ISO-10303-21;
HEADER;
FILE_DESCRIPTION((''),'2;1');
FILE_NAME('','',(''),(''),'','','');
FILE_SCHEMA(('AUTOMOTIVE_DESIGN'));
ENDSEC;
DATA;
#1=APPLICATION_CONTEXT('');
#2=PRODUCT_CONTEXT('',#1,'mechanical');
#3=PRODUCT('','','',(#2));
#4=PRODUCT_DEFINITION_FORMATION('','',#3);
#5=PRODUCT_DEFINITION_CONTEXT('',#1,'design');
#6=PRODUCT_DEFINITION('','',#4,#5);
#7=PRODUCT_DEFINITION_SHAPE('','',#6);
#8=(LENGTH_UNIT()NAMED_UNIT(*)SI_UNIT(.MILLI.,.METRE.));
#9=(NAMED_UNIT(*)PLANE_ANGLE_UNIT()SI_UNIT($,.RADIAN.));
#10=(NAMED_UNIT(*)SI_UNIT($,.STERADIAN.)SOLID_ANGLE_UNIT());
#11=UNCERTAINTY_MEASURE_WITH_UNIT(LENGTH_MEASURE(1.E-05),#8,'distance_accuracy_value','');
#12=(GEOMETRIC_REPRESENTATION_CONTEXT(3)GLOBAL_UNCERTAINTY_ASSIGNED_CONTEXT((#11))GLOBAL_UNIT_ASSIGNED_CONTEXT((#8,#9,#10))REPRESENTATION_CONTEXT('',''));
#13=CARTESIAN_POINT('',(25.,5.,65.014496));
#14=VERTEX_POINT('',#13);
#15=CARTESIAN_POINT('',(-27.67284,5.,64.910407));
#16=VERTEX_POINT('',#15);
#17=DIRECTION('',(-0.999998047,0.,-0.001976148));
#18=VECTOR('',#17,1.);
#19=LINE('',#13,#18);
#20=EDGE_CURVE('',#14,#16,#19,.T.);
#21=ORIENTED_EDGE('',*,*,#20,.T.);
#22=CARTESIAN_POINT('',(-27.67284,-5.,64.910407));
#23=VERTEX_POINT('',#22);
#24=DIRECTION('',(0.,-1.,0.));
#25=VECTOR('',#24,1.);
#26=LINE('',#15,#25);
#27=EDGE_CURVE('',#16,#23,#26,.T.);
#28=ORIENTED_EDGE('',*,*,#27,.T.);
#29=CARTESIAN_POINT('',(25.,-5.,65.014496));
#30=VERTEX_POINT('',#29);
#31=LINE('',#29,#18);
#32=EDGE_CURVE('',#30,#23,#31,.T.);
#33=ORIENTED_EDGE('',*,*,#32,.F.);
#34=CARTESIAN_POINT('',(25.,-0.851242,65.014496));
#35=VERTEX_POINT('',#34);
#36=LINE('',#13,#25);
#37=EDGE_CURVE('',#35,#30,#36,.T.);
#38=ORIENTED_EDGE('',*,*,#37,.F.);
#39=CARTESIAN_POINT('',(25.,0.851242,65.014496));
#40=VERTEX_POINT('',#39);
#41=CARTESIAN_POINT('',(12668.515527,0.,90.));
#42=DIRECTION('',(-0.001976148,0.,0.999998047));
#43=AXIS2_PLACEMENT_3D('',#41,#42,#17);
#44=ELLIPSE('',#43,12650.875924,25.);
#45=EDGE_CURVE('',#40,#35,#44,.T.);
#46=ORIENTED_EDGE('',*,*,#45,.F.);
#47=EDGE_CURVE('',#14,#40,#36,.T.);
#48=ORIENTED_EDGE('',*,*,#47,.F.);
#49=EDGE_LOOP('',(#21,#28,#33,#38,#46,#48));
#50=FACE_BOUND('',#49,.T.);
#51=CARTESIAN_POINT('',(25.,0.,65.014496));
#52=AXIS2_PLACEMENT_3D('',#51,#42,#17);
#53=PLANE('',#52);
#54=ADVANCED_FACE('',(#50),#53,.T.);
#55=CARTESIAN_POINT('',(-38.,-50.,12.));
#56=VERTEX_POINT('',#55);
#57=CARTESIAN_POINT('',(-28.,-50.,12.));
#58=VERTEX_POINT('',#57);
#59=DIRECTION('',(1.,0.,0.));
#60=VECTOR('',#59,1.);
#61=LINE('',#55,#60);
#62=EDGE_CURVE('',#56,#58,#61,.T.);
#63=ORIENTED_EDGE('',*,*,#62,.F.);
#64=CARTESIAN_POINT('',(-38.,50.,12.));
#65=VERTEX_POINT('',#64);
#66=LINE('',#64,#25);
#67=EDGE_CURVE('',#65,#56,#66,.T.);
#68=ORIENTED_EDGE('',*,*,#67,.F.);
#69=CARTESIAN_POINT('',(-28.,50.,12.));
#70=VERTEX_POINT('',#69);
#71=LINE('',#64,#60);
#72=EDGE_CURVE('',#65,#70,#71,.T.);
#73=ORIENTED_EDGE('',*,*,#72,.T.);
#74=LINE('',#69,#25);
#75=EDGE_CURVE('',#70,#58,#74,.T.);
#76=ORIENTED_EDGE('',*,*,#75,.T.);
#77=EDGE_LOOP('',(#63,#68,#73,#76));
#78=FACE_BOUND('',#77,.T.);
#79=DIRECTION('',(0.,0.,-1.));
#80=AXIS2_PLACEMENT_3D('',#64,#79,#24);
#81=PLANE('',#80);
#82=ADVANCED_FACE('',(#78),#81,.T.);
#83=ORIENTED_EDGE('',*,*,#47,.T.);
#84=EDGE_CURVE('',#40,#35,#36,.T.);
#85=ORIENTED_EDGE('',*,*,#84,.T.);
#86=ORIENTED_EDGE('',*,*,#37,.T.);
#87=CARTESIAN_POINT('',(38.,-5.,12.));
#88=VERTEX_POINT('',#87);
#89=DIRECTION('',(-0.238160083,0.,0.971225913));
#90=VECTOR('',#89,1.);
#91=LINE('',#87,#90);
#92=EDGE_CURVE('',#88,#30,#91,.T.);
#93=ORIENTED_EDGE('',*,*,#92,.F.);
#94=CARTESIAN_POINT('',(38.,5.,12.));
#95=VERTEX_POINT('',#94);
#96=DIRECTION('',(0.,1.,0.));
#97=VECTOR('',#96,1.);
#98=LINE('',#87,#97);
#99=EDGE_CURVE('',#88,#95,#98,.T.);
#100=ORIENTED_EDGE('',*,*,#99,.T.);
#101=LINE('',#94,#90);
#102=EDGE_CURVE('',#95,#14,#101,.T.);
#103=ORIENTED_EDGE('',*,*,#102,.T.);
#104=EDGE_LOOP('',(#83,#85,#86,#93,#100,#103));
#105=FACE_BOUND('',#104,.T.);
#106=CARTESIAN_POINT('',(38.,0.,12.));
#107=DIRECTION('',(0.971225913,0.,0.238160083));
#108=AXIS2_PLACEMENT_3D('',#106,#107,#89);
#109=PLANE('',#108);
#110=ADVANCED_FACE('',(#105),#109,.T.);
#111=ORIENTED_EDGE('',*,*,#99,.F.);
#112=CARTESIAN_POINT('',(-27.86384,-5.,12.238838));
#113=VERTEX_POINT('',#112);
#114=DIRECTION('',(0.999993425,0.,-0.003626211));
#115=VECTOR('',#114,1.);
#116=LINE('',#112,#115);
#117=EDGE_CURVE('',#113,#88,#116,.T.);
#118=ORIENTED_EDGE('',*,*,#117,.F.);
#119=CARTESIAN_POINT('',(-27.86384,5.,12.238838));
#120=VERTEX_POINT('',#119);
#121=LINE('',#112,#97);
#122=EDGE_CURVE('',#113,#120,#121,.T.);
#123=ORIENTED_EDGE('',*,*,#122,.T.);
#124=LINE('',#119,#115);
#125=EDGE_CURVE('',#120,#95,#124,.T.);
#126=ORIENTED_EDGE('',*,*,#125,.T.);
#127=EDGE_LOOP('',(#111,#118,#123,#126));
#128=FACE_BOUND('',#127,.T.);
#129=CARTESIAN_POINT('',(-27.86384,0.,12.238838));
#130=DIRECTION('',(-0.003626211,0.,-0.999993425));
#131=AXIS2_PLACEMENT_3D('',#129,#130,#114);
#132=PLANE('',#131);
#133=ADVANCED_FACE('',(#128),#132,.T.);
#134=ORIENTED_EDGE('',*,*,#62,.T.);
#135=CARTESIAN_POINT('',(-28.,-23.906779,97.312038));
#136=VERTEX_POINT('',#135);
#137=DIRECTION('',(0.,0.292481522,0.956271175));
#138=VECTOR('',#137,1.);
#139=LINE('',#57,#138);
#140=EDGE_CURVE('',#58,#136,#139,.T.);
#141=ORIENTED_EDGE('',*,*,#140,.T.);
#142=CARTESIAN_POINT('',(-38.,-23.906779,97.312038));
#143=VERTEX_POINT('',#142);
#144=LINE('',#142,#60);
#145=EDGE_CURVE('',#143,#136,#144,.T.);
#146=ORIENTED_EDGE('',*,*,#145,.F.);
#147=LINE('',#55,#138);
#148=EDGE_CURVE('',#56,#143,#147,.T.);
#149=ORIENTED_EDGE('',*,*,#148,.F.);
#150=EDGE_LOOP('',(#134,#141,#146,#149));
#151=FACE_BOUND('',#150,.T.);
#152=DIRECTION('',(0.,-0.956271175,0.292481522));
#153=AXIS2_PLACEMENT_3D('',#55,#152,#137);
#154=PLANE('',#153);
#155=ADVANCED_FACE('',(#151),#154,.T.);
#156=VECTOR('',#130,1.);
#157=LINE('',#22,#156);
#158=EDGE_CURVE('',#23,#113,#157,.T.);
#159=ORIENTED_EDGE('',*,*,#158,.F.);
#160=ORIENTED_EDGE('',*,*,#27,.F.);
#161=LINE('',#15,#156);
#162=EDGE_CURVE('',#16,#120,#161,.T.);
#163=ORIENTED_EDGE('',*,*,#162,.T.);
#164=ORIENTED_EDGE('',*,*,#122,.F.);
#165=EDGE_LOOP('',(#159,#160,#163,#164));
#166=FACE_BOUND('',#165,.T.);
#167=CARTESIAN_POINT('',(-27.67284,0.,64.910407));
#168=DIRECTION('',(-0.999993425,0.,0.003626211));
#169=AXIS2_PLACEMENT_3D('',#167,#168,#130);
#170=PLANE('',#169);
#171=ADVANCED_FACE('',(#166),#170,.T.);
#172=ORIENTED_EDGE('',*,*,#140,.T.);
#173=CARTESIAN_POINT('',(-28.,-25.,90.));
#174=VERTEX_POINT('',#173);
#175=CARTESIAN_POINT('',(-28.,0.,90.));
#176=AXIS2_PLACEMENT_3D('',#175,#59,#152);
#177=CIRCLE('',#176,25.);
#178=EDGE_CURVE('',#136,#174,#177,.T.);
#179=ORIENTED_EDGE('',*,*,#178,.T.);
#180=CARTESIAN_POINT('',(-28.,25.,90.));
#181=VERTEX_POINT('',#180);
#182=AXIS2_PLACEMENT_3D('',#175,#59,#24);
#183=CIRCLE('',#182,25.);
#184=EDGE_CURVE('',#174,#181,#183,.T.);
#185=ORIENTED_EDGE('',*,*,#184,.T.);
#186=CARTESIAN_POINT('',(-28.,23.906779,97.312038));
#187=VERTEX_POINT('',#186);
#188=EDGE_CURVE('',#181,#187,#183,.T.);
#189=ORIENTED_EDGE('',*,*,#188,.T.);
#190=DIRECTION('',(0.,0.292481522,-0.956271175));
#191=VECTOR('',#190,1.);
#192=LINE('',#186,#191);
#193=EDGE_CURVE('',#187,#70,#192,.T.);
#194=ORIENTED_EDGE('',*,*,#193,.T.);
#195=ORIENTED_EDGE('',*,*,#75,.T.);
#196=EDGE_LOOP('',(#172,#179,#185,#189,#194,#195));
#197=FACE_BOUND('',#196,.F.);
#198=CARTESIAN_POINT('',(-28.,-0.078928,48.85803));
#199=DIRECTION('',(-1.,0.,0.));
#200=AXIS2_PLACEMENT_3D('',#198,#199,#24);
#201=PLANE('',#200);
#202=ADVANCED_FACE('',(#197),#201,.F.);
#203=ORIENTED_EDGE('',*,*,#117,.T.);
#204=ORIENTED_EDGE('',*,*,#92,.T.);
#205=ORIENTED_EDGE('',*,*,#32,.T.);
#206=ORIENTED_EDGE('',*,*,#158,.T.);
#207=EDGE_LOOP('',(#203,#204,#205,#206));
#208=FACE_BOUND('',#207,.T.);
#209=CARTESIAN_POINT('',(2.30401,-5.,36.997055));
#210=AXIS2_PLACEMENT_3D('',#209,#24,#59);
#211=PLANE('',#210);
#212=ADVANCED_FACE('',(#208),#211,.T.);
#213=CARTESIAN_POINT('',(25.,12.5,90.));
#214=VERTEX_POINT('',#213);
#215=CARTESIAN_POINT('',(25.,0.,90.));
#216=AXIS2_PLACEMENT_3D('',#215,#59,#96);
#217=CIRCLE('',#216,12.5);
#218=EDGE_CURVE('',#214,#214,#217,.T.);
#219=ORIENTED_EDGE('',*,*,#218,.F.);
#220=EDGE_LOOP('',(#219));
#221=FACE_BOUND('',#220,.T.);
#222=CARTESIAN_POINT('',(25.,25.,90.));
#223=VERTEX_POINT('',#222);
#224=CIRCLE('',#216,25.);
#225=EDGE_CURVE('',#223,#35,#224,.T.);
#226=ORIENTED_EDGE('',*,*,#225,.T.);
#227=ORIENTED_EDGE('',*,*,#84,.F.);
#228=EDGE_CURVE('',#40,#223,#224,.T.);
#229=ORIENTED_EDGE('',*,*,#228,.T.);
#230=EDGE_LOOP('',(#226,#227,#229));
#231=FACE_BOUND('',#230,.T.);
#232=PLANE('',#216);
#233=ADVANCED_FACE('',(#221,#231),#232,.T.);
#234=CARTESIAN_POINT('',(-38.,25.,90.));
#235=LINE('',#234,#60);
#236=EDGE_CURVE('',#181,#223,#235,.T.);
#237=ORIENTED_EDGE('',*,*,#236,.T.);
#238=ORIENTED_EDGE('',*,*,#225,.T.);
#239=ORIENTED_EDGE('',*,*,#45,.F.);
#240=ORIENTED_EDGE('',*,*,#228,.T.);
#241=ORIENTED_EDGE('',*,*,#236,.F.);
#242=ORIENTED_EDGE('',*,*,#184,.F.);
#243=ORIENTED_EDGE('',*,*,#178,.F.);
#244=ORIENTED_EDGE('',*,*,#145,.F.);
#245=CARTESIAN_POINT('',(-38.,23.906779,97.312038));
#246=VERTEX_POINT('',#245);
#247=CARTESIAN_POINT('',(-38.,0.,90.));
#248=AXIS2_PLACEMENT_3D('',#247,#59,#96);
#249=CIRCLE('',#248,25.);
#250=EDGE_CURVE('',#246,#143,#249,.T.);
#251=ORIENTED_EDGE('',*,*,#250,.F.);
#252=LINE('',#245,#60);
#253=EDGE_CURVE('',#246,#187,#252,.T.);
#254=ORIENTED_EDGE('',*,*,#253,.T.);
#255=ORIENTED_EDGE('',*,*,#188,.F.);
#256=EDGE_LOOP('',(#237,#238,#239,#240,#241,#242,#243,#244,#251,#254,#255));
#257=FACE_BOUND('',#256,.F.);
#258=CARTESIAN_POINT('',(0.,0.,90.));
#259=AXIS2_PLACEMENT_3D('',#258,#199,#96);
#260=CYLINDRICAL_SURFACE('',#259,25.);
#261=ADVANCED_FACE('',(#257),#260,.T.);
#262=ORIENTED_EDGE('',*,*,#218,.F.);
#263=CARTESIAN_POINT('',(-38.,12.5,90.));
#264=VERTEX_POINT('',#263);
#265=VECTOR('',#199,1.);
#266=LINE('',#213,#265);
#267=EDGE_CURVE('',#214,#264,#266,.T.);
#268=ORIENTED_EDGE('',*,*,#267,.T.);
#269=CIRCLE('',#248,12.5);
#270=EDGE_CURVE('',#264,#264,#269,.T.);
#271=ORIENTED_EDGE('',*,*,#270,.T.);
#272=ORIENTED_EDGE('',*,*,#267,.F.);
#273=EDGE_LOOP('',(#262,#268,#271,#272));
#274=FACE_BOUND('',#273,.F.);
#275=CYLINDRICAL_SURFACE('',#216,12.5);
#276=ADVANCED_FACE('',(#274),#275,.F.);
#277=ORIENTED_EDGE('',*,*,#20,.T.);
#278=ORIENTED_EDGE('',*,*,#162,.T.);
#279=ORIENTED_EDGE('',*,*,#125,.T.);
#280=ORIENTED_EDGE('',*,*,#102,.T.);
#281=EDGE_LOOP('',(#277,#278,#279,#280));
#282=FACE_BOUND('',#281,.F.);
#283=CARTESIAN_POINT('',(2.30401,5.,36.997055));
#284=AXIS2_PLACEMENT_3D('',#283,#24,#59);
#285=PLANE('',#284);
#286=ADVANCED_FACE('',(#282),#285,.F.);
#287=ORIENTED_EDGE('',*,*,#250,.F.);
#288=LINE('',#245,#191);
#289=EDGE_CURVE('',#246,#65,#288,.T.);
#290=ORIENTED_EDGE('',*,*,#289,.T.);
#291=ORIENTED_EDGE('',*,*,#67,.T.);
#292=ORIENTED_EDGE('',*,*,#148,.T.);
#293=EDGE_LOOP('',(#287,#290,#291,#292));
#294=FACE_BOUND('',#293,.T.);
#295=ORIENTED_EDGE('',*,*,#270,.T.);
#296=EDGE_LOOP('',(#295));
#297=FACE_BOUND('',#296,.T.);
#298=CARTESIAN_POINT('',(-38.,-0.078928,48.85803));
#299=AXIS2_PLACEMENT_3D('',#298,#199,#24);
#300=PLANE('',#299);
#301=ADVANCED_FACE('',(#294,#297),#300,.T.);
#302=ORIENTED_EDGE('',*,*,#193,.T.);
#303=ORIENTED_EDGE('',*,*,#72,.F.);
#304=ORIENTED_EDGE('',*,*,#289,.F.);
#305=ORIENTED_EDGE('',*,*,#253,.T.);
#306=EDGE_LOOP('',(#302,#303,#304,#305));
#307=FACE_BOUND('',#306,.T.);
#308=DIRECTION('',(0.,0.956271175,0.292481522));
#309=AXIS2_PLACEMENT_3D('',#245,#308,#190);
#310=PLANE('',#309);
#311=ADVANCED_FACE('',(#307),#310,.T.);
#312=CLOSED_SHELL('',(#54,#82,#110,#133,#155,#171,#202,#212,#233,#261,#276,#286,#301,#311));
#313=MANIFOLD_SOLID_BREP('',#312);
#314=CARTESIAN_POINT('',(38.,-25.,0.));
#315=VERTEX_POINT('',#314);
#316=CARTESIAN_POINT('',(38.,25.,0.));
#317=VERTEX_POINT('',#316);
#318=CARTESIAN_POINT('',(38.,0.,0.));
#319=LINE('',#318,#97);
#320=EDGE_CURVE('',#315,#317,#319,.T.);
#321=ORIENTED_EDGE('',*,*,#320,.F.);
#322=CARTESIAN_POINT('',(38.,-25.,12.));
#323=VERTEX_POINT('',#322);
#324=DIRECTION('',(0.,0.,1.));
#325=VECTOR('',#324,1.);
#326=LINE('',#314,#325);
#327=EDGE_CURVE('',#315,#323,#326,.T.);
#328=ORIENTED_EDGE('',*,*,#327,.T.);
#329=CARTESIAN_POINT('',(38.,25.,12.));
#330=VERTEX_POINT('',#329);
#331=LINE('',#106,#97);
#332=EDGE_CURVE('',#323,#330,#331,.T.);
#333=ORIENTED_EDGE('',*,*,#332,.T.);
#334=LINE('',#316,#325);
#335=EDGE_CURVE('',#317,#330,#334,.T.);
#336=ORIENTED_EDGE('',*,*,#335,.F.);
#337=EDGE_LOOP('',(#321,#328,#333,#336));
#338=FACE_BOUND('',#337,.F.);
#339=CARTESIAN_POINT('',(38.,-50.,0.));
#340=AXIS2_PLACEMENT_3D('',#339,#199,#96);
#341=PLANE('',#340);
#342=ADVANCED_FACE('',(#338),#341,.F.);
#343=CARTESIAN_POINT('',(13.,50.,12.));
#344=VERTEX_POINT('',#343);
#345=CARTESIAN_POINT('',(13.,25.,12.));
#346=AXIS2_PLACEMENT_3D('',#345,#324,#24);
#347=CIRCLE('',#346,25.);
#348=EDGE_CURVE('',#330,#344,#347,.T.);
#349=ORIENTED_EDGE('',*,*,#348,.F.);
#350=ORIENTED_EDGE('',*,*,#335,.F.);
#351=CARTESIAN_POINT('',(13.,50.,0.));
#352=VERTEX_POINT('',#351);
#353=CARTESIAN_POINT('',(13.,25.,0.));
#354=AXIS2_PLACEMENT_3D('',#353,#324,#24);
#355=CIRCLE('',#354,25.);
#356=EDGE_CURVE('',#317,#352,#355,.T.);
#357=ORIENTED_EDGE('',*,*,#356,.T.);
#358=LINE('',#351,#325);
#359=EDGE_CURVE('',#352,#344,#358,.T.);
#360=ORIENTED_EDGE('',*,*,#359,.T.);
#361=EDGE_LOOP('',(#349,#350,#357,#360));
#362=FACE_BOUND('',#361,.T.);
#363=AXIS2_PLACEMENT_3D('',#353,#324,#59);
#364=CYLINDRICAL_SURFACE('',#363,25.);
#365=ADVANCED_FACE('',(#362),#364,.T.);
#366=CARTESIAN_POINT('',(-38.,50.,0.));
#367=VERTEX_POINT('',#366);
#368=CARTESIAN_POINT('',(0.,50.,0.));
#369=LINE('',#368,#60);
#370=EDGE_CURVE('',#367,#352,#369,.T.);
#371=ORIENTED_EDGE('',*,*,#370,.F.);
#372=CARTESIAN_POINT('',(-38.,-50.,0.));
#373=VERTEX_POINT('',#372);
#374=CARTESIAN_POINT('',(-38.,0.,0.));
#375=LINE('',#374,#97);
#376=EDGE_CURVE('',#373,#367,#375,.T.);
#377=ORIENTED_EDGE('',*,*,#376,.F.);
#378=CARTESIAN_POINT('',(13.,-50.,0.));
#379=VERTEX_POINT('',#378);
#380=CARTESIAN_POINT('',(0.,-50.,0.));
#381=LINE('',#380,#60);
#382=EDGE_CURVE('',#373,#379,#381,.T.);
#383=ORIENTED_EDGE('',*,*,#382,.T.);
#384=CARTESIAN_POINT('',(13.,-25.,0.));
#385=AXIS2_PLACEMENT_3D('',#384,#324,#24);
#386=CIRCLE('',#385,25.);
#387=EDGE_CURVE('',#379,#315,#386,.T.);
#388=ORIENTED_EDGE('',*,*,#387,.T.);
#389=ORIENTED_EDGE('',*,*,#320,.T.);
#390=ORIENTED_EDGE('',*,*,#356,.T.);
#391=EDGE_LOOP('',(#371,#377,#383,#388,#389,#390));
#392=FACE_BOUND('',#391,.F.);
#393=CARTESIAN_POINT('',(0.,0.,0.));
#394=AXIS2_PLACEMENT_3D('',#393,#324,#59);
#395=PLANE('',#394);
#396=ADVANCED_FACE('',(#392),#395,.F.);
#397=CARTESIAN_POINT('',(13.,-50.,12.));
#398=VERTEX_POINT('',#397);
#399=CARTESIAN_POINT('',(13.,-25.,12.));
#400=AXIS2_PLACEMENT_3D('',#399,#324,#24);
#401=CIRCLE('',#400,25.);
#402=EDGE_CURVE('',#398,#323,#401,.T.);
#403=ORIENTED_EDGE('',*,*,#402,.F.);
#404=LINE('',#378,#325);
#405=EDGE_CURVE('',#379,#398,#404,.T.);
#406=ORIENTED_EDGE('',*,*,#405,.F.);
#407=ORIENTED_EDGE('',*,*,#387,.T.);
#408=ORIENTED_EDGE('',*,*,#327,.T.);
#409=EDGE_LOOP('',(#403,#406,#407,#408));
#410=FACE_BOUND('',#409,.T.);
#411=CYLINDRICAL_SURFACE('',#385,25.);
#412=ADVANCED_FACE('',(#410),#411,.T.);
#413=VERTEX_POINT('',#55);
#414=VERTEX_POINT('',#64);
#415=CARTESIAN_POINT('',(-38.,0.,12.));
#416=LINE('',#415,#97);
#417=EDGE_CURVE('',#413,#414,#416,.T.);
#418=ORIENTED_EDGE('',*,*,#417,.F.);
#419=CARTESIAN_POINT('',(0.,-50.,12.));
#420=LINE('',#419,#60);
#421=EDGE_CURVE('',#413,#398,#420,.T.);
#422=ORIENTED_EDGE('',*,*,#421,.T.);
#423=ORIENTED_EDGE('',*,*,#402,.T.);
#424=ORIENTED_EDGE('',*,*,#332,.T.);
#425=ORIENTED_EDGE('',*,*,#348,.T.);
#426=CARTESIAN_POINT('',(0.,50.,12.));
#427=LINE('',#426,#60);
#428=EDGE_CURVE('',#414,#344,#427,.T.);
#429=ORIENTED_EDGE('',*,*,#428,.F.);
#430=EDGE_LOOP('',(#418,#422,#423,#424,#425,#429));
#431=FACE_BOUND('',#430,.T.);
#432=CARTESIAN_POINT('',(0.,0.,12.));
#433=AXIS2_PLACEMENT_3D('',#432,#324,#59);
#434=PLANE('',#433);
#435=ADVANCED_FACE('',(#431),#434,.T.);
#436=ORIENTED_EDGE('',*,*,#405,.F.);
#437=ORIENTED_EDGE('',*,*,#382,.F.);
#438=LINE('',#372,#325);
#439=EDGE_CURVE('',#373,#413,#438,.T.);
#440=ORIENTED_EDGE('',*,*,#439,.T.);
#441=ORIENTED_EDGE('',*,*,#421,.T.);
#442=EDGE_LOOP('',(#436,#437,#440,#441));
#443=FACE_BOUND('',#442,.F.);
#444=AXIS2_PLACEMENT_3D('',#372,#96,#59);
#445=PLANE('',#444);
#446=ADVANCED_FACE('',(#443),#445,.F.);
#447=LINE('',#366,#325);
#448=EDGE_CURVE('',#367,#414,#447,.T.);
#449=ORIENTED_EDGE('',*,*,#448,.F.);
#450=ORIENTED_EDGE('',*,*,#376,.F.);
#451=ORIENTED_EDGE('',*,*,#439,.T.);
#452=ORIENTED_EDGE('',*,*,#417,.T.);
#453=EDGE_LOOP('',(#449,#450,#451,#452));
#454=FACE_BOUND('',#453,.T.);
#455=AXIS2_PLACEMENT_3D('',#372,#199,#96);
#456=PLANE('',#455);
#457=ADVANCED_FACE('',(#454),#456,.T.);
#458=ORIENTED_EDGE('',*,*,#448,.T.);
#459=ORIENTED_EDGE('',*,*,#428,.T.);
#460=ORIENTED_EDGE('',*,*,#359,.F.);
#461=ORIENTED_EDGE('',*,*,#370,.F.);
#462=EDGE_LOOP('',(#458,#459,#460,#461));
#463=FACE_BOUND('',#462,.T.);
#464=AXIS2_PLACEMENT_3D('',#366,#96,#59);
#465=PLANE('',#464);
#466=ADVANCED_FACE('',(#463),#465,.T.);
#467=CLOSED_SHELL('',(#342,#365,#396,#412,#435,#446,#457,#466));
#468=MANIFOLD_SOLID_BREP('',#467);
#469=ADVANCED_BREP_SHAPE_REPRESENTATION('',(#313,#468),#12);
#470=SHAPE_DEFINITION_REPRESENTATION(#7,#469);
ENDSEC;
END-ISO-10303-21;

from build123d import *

# Parameters (mm, degrees)
F0_W      = 76
F0_H      = 100
F1_DEPTH  = 12
F2_R      = 25
F3_R      = 25
F4_DEPTH  = 25
F5_R      = 12.5
F6_DEPTH  = 63
F7_DEPTH  = 63
F8_R      = 12.5
F9_DEPTH  = 63.001
F11_DEPTH = 10
F13_DEPTH = 5


with BuildPart() as f1:
    # F0 (on Top) → F1 (new body)
    with BuildSketch(Plane.XY):
        Rectangle(F0_W, F0_H)
    extrude(amount=F1_DEPTH)

    # F2
    f2_edges = [f1.edges().sort_by_distance(p)[0] for p in [
        (38, -50, 6),
        (38, 50, 6),
    ]]
    fillet(f2_edges, radius=F2_R)

    # F5 (on face) → F6 (cut)
    with BuildSketch(Plane.YZ.offset(25)):
        with Locations((0, 90)):
            Circle(F5_R)
    extrude(amount=F6_DEPTH, mode=Mode.SUBTRACT)


with BuildPart() as f4:
    # F3 (on Right) → F4 (new body)
    with BuildSketch(Plane.YZ):
        with Locations((0, 90)):
            Circle(F3_R)
    extrude(amount=F4_DEPTH)

    # F7 (add): a face of the model
    f7_faces = [f4.faces().sort_by_distance(p)[0] for p in [
        (25, 0, 90),
    ]]
    extrude(f7_faces, amount=-F7_DEPTH)

    # F8 (on face) → F9 (cut, through all)
    with BuildSketch(Plane.YZ.offset(25)):
        with Locations((0, 90)):
            Circle(F8_R)
    extrude(amount=-F9_DEPTH, mode=Mode.SUBTRACT)

    # F10 (on face) → F11 (join)
    with BuildSketch(Plane(origin=(-38, 0, 0), x_dir=(0, -1, 0), z_dir=(-1, 0, 0))):
        with BuildLine():
            ThreePointArc((25, 90), (-3.6966549694, 65.2748156319), (-23.906779363, 97.3120380532))
            Line((-23.906779363, 97.3120380532), (-50, 12))
            Line((-50, 12), (50, 12))
            Line((50, 12), (23.906779363, 97.3120380532))
            ThreePointArc((23.906779363, 97.3120380532), (24.7251843681, 93.6966549694), (25, 90))
        make_face()
    extrude(amount=-F11_DEPTH)

    # F12 (on Front) → F13 (join, symmetric)
    with BuildSketch(Plane.XZ):
        Polygon((38, 12), (25, 65.0144964457), (-27.6728401392, 64.9104069279), (-27.8638396412, 12.2388377786), align=None)
    extrude(amount=F13_DEPTH, both=True)


solid = Compound([f1.part, f4.part])
